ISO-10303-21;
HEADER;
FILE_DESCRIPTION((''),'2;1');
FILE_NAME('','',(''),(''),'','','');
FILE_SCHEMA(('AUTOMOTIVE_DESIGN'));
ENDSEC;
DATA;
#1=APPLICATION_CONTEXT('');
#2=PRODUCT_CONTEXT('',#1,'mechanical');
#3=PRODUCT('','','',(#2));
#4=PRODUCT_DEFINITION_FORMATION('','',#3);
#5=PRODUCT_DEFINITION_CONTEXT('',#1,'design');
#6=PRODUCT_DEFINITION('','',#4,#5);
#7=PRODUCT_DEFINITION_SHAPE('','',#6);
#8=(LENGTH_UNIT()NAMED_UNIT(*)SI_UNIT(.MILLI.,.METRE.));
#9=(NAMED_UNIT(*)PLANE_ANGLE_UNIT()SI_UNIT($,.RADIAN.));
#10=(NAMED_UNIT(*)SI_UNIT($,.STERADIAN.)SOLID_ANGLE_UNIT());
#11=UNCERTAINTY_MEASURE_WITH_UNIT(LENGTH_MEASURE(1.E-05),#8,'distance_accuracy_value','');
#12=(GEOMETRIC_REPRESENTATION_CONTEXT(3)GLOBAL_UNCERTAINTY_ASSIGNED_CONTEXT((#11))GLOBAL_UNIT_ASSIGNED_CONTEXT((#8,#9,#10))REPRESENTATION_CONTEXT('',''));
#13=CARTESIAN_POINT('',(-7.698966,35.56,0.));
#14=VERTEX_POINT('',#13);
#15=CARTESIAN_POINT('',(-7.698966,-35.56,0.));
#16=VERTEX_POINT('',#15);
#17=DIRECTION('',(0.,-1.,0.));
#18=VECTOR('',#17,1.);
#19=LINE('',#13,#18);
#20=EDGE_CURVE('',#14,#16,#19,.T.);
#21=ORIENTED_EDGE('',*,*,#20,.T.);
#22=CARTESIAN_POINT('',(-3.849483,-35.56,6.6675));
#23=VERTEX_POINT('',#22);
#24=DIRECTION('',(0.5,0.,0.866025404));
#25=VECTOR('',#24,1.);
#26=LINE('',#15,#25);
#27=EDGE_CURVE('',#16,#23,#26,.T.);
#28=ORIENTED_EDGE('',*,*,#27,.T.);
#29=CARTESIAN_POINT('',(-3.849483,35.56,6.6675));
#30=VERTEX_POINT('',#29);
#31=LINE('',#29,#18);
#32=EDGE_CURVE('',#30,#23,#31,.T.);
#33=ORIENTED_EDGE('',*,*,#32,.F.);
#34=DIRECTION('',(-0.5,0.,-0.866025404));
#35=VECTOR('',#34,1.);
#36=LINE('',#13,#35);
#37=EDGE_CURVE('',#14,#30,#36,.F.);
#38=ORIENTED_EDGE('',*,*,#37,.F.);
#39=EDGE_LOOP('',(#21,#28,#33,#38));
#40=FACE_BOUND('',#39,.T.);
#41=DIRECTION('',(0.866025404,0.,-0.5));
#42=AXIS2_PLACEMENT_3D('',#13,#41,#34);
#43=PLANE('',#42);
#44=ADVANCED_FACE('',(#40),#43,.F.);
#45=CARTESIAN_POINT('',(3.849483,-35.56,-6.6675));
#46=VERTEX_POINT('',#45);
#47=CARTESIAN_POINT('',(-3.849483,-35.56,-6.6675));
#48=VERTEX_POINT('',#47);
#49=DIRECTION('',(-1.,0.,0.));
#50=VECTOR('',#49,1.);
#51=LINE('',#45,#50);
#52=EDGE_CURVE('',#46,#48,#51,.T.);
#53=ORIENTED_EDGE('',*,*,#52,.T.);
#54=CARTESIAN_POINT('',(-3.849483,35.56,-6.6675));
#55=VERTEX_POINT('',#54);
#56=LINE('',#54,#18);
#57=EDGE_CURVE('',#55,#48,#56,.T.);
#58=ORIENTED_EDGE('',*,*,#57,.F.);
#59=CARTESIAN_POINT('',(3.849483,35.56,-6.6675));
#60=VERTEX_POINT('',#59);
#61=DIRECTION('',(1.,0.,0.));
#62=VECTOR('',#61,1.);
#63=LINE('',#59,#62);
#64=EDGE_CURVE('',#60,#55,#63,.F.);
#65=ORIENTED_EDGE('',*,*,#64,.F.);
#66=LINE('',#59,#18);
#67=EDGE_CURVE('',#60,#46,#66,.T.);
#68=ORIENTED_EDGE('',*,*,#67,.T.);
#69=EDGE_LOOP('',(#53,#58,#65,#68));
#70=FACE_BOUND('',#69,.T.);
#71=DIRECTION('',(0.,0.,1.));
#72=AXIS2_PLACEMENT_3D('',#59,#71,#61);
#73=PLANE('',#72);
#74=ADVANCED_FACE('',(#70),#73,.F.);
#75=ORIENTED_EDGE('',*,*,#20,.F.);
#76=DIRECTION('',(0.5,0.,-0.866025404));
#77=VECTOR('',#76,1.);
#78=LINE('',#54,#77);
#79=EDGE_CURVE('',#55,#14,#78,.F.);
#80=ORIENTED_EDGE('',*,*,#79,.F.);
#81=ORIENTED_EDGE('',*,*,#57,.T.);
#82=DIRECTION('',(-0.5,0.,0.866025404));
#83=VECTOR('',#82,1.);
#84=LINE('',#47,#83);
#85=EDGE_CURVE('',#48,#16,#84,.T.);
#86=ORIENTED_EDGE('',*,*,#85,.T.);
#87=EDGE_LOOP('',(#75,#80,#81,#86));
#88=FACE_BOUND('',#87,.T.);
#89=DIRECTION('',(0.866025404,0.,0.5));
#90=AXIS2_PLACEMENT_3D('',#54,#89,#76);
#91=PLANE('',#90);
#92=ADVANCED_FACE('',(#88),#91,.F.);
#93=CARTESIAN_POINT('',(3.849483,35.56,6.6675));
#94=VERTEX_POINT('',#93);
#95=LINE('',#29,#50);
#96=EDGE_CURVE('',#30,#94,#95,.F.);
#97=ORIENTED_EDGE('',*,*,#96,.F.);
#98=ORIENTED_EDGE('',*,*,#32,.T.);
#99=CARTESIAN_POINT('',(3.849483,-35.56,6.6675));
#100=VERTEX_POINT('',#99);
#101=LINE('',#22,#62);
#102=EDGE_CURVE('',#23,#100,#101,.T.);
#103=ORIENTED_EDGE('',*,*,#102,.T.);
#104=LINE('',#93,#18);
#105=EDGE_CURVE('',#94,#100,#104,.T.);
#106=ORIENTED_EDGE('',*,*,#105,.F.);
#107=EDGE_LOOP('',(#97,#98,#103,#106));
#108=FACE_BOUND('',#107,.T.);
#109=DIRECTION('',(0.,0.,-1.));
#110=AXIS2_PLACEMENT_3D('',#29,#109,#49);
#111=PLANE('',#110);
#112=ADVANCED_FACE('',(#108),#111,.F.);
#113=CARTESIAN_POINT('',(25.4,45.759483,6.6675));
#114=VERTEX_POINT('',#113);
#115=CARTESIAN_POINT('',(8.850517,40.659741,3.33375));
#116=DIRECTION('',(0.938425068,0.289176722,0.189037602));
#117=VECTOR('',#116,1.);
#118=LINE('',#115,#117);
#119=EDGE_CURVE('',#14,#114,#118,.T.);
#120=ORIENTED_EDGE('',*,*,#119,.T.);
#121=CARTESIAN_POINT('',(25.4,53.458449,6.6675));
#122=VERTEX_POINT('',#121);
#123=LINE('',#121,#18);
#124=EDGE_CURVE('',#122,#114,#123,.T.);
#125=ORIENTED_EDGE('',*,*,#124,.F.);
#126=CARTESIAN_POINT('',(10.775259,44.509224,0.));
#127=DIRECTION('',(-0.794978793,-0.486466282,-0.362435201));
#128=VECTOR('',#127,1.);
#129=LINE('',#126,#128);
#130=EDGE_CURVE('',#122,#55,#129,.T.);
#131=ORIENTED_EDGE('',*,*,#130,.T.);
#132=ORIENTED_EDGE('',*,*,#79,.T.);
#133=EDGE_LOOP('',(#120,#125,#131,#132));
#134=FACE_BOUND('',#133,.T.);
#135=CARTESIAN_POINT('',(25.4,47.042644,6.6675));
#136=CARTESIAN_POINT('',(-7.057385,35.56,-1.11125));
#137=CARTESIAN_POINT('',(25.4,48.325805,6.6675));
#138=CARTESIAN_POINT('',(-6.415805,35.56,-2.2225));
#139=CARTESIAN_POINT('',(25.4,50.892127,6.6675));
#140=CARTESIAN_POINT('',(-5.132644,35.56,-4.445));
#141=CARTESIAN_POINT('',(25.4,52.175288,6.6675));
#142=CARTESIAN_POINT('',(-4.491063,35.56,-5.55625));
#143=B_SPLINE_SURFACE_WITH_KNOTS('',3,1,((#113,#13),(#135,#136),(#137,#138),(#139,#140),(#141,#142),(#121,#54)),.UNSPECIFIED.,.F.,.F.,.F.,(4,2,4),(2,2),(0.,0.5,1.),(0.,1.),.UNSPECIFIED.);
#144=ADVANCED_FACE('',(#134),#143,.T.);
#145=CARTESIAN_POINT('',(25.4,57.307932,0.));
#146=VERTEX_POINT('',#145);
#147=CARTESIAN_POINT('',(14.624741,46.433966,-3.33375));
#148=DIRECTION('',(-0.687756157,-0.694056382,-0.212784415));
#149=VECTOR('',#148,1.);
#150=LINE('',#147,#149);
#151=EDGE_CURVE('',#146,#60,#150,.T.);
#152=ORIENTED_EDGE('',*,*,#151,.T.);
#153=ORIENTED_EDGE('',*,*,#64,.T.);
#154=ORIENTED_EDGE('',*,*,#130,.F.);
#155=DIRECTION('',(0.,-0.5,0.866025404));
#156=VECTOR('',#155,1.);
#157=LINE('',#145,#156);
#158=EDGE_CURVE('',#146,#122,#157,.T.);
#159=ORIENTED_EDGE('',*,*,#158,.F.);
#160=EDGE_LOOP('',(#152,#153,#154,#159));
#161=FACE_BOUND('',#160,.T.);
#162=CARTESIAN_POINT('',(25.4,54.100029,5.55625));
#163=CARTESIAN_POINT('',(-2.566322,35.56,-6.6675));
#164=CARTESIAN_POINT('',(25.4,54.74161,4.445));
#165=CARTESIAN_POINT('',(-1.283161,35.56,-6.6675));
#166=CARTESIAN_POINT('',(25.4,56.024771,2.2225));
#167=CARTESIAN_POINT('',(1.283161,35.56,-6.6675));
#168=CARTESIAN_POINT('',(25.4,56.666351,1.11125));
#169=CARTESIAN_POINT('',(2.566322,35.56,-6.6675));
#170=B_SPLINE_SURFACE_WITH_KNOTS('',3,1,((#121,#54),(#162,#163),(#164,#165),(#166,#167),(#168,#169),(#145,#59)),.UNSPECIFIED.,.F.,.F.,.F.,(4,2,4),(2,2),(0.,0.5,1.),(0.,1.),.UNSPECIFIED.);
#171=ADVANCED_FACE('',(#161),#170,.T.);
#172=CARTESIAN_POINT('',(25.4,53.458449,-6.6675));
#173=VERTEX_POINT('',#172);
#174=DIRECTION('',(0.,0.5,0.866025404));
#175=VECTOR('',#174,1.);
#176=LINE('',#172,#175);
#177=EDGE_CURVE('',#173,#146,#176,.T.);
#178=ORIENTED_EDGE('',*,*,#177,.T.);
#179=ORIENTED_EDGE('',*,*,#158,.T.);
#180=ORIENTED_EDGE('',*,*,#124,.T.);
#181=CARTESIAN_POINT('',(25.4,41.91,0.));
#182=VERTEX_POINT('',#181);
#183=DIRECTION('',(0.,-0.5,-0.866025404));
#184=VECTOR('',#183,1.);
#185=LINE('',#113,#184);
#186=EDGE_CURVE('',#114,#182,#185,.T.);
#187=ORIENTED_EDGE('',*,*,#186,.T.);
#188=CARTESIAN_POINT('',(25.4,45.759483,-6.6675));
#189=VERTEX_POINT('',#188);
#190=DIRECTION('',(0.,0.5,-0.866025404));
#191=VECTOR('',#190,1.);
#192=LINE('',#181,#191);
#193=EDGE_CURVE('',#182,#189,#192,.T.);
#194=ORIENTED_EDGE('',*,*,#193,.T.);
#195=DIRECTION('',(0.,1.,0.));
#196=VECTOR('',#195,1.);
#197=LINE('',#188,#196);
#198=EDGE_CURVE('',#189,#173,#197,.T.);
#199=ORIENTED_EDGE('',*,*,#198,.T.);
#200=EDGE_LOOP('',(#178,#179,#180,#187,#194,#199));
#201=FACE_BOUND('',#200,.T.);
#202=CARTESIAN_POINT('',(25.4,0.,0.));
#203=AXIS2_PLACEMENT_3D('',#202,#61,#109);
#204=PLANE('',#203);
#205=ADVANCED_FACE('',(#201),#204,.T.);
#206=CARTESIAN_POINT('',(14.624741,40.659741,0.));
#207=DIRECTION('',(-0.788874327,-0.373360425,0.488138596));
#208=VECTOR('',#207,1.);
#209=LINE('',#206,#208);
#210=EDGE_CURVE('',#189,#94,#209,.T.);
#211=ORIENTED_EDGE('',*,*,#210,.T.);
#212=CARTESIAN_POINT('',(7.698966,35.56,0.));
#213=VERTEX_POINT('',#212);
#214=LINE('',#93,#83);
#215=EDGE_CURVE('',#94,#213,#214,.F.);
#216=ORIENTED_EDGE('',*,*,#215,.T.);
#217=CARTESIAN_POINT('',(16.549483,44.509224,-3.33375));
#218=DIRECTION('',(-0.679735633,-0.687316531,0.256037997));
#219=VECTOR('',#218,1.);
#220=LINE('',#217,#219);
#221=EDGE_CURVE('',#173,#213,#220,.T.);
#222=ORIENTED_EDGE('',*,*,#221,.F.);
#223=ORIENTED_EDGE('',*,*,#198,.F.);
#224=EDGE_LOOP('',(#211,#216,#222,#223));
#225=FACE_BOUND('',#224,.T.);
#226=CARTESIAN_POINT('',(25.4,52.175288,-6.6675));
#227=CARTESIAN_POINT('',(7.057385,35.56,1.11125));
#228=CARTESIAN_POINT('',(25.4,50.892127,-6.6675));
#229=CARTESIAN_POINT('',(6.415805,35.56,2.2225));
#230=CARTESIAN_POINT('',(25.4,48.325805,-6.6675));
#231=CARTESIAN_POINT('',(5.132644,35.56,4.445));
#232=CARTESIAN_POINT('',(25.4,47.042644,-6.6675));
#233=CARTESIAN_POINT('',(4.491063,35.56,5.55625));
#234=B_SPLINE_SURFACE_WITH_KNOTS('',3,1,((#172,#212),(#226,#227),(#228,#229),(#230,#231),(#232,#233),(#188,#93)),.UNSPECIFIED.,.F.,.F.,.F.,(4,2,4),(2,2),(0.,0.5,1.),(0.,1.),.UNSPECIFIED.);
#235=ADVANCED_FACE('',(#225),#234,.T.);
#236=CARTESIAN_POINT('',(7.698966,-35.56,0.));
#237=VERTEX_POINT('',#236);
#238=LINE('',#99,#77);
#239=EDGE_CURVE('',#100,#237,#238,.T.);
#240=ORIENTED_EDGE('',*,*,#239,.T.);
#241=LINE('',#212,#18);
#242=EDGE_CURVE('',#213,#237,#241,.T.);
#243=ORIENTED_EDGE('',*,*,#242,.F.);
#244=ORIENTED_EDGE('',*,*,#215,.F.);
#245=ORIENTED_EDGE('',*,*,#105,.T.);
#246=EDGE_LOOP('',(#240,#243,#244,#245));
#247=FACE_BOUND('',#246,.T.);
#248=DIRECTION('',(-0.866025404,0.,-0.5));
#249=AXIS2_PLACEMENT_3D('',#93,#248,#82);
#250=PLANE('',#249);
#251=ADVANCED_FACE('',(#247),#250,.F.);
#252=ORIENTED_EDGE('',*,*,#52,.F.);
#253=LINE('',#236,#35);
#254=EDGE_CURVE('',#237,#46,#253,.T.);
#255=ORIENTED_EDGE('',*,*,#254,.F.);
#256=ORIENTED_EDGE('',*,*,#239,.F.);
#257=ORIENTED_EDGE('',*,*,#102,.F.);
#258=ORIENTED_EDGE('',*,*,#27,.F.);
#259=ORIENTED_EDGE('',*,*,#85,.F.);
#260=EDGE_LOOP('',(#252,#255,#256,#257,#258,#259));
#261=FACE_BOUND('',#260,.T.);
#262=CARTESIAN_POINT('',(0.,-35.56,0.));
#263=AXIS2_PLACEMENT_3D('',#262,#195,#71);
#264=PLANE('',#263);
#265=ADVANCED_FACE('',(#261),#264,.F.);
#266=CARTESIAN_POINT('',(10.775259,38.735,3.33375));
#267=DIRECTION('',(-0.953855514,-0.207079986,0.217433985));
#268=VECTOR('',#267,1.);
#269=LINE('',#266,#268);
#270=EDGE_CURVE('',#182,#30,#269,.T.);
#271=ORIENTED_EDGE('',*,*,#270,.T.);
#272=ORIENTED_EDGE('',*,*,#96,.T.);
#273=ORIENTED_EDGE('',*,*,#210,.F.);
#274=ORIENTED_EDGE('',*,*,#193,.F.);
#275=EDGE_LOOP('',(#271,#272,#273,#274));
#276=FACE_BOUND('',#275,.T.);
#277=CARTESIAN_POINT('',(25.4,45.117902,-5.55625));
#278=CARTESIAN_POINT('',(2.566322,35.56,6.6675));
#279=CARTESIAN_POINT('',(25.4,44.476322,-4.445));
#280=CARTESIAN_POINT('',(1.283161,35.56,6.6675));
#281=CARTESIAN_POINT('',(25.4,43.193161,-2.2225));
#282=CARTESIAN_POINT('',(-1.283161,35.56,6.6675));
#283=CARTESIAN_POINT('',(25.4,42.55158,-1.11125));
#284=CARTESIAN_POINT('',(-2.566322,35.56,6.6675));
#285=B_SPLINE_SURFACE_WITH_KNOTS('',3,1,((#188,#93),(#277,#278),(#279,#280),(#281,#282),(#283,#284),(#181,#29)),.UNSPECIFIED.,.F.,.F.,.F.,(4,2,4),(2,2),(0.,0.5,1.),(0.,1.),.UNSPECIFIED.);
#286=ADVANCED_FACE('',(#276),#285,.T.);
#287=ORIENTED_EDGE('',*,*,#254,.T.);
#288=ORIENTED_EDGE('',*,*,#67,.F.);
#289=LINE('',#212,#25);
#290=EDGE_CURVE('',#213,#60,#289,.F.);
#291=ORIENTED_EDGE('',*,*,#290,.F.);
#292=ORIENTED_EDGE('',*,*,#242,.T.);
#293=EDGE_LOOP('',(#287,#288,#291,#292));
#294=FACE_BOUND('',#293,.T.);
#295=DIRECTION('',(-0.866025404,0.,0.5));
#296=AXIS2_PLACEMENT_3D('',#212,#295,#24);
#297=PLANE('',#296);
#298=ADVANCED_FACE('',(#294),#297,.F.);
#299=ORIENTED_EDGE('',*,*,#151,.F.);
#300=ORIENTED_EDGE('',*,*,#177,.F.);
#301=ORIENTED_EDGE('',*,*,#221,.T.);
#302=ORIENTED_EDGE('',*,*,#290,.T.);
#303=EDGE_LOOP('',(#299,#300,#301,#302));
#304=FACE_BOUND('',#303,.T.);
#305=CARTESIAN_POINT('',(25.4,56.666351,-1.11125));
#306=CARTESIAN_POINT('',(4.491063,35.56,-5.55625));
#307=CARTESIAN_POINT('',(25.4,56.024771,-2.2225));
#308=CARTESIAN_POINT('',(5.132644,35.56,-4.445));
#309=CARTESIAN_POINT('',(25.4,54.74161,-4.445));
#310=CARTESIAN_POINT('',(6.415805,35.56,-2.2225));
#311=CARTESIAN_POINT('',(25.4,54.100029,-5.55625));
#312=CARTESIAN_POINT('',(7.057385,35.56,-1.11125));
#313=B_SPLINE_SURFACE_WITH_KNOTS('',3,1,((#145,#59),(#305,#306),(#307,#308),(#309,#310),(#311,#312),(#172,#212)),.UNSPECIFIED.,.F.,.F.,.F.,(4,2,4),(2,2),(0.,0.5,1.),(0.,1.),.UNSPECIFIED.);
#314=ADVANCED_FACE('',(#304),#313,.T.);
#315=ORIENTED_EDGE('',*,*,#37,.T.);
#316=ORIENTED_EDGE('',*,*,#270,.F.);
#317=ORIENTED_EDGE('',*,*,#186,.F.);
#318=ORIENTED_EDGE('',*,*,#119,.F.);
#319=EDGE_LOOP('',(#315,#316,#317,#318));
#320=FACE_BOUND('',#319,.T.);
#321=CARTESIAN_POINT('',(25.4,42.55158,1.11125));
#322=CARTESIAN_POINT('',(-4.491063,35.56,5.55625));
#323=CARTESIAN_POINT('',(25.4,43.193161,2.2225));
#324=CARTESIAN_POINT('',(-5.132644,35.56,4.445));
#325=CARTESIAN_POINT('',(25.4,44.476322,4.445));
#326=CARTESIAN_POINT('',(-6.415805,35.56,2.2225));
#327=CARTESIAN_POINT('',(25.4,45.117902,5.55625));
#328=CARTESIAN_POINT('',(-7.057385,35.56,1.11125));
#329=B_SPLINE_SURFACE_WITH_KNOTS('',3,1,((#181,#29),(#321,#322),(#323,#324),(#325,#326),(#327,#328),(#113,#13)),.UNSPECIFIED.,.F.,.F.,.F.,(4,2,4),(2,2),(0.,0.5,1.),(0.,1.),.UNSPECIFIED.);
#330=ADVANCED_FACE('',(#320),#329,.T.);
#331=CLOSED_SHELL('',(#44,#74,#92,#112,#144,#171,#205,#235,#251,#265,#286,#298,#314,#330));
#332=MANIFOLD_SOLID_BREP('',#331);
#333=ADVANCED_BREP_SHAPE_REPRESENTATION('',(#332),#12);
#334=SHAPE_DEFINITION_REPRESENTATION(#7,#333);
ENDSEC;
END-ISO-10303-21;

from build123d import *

# Parameters (mm, degrees)
BOSS_EXTRUDE1_DEPTH = 35.56


with BuildPart() as part:
    # Sketch1 → Boss-Extrude1 (new, symmetric)
    with BuildSketch(Plane(origin=(0, 0, 0), x_dir=(1, 0, 0), z_dir=(0, 1, 0))):
        Polygon((7.69896584, 0), (3.84948292, 6.6675), (-3.84948292, 6.6675), (-7.69896584, 0), (-3.84948292, -6.6675), (3.84948292, -6.6675), align=None)
    extrude(amount=BOSS_EXTRUDE1_DEPTH, both=True)

    # Loft2: read off the stored shape, not the designer's step
    # Loft2: loft between two sections, ruled curve by curve
    loft2_from = [
        Edge.make_bspline([(25.4, 45.75948292, 6.6675), (25.4, 47.042643893, 6.6675), (25.4, 48.325804866, 6.6675), (25.4, 50.892126813, 6.6675), (25.4, 52.175287786, 6.6675), (25.4, 53.458448759, 6.6675)], [0, 0, 0, 0, 0.5, 0.5, 1, 1, 1, 1], 3),
        Edge.make_bspline([(25.4, 53.458448759, 6.6675), (25.4, 54.100029246, 5.55625), (25.4, 54.741609733, 4.445), (25.4, 56.024770706, 2.2225), (25.4, 56.666351193, 1.11125), (25.4, 57.307931679, 0)], [0, 0, 0, 0, 0.5, 0.5, 1, 1, 1, 1], 3),
        Edge.make_bspline([(25.4, 41.91, 0), (25.4, 42.551580487, 1.11125), (25.4, 43.193160973, 2.2225), (25.4, 44.476321947, 4.445), (25.4, 45.117902433, 5.55625), (25.4, 45.75948292, 6.6675)], [0, 0, 0, 0, 0.5, 0.5, 1, 1, 1, 1], 3),
        Edge.make_bspline([(25.4, 57.307931679, 0), (25.4, 56.666351193, -1.11125), (25.4, 56.024770706, -2.2225), (25.4, 54.741609733, -4.445), (25.4, 54.100029246, -5.55625), (25.4, 53.458448759, -6.6675)], [0, 0, 0, 0, 0.5, 0.5, 1, 1, 1, 1], 3),
        Edge.make_bspline([(25.4, 53.458448759, -6.6675), (25.4, 52.175287786, -6.6675), (25.4, 50.892126813, -6.6675), (25.4, 48.325804866, -6.6675), (25.4, 47.042643893, -6.6675), (25.4, 45.75948292, -6.6675)], [0, 0, 0, 0, 0.5, 0.5, 1, 1, 1, 1], 3),
        Edge.make_bspline([(25.4, 45.75948292, -6.6675), (25.4, 45.117902433, -5.55625), (25.4, 44.476321947, -4.445), (25.4, 43.193160973, -2.2225), (25.4, 42.551580487, -1.11125), (25.4, 41.91, 0)], [0, 0, 0, 0, 0.5, 0.5, 1, 1, 1, 1], 3),
    ]
    loft2_to = [
        Edge.make_bspline([(-7.69896584, 35.56, 0), (-7.057385353, 35.56, -1.11125), (-6.415804866, 35.56, -2.2225), (-5.132643893, 35.56, -4.445), (-4.491063406, 35.56, -5.55625), (-3.84948292, 35.56, -6.6675)], [0, 0, 0, 0, 0.5, 0.5, 1, 1, 1, 1], 3),
        Edge.make_bspline([(-3.84948292, 35.56, -6.6675), (-2.566321947, 35.56, -6.6675), (-1.283160973, 35.56, -6.6675), (1.283160973, 35.56, -6.6675), (2.566321947, 35.56, -6.6675), (3.84948292, 35.56, -6.6675)], [0, 0, 0, 0, 0.5, 0.5, 1, 1, 1, 1], 3),
        Edge.make_bspline([(-3.84948292, 35.56, 6.6675), (-4.491063406, 35.56, 5.55625), (-5.132643893, 35.56, 4.445), (-6.415804866, 35.56, 2.2225), (-7.057385353, 35.56, 1.11125), (-7.69896584, 35.56, 0)], [0, 0, 0, 0, 0.5, 0.5, 1, 1, 1, 1], 3),
        Edge.make_bspline([(3.84948292, 35.56, -6.6675), (4.491063406, 35.56, -5.55625), (5.132643893, 35.56, -4.445), (6.415804866, 35.56, -2.2225), (7.057385353, 35.56, -1.11125), (7.69896584, 35.56, 0)], [0, 0, 0, 0, 0.5, 0.5, 1, 1, 1, 1], 3),
        Edge.make_bspline([(7.69896584, 35.56, 0), (7.057385353, 35.56, 1.11125), (6.415804866, 35.56, 2.2225), (5.132643893, 35.56, 4.445), (4.491063406, 35.56, 5.55625), (3.84948292, 35.56, 6.6675)], [0, 0, 0, 0, 0.5, 0.5, 1, 1, 1, 1], 3),
        Edge.make_bspline([(3.84948292, 35.56, 6.6675), (2.566321947, 35.56, 6.6675), (1.283160973, 35.56, 6.6675), (-1.283160973, 35.56, 6.6675), (-2.566321947, 35.56, 6.6675), (-3.84948292, 35.56, 6.6675)], [0, 0, 0, 0, 0.5, 0.5, 1, 1, 1, 1], 3),
    ]
    loft2 = Solid(Shell([*[Face.make_surface_from_curves(loft2_from[k], loft2_to[k]) for k in range(6)], Face(Wire(loft2_from)), Face(Wire(loft2_to))]))
    add(loft2)


solid = part.part
